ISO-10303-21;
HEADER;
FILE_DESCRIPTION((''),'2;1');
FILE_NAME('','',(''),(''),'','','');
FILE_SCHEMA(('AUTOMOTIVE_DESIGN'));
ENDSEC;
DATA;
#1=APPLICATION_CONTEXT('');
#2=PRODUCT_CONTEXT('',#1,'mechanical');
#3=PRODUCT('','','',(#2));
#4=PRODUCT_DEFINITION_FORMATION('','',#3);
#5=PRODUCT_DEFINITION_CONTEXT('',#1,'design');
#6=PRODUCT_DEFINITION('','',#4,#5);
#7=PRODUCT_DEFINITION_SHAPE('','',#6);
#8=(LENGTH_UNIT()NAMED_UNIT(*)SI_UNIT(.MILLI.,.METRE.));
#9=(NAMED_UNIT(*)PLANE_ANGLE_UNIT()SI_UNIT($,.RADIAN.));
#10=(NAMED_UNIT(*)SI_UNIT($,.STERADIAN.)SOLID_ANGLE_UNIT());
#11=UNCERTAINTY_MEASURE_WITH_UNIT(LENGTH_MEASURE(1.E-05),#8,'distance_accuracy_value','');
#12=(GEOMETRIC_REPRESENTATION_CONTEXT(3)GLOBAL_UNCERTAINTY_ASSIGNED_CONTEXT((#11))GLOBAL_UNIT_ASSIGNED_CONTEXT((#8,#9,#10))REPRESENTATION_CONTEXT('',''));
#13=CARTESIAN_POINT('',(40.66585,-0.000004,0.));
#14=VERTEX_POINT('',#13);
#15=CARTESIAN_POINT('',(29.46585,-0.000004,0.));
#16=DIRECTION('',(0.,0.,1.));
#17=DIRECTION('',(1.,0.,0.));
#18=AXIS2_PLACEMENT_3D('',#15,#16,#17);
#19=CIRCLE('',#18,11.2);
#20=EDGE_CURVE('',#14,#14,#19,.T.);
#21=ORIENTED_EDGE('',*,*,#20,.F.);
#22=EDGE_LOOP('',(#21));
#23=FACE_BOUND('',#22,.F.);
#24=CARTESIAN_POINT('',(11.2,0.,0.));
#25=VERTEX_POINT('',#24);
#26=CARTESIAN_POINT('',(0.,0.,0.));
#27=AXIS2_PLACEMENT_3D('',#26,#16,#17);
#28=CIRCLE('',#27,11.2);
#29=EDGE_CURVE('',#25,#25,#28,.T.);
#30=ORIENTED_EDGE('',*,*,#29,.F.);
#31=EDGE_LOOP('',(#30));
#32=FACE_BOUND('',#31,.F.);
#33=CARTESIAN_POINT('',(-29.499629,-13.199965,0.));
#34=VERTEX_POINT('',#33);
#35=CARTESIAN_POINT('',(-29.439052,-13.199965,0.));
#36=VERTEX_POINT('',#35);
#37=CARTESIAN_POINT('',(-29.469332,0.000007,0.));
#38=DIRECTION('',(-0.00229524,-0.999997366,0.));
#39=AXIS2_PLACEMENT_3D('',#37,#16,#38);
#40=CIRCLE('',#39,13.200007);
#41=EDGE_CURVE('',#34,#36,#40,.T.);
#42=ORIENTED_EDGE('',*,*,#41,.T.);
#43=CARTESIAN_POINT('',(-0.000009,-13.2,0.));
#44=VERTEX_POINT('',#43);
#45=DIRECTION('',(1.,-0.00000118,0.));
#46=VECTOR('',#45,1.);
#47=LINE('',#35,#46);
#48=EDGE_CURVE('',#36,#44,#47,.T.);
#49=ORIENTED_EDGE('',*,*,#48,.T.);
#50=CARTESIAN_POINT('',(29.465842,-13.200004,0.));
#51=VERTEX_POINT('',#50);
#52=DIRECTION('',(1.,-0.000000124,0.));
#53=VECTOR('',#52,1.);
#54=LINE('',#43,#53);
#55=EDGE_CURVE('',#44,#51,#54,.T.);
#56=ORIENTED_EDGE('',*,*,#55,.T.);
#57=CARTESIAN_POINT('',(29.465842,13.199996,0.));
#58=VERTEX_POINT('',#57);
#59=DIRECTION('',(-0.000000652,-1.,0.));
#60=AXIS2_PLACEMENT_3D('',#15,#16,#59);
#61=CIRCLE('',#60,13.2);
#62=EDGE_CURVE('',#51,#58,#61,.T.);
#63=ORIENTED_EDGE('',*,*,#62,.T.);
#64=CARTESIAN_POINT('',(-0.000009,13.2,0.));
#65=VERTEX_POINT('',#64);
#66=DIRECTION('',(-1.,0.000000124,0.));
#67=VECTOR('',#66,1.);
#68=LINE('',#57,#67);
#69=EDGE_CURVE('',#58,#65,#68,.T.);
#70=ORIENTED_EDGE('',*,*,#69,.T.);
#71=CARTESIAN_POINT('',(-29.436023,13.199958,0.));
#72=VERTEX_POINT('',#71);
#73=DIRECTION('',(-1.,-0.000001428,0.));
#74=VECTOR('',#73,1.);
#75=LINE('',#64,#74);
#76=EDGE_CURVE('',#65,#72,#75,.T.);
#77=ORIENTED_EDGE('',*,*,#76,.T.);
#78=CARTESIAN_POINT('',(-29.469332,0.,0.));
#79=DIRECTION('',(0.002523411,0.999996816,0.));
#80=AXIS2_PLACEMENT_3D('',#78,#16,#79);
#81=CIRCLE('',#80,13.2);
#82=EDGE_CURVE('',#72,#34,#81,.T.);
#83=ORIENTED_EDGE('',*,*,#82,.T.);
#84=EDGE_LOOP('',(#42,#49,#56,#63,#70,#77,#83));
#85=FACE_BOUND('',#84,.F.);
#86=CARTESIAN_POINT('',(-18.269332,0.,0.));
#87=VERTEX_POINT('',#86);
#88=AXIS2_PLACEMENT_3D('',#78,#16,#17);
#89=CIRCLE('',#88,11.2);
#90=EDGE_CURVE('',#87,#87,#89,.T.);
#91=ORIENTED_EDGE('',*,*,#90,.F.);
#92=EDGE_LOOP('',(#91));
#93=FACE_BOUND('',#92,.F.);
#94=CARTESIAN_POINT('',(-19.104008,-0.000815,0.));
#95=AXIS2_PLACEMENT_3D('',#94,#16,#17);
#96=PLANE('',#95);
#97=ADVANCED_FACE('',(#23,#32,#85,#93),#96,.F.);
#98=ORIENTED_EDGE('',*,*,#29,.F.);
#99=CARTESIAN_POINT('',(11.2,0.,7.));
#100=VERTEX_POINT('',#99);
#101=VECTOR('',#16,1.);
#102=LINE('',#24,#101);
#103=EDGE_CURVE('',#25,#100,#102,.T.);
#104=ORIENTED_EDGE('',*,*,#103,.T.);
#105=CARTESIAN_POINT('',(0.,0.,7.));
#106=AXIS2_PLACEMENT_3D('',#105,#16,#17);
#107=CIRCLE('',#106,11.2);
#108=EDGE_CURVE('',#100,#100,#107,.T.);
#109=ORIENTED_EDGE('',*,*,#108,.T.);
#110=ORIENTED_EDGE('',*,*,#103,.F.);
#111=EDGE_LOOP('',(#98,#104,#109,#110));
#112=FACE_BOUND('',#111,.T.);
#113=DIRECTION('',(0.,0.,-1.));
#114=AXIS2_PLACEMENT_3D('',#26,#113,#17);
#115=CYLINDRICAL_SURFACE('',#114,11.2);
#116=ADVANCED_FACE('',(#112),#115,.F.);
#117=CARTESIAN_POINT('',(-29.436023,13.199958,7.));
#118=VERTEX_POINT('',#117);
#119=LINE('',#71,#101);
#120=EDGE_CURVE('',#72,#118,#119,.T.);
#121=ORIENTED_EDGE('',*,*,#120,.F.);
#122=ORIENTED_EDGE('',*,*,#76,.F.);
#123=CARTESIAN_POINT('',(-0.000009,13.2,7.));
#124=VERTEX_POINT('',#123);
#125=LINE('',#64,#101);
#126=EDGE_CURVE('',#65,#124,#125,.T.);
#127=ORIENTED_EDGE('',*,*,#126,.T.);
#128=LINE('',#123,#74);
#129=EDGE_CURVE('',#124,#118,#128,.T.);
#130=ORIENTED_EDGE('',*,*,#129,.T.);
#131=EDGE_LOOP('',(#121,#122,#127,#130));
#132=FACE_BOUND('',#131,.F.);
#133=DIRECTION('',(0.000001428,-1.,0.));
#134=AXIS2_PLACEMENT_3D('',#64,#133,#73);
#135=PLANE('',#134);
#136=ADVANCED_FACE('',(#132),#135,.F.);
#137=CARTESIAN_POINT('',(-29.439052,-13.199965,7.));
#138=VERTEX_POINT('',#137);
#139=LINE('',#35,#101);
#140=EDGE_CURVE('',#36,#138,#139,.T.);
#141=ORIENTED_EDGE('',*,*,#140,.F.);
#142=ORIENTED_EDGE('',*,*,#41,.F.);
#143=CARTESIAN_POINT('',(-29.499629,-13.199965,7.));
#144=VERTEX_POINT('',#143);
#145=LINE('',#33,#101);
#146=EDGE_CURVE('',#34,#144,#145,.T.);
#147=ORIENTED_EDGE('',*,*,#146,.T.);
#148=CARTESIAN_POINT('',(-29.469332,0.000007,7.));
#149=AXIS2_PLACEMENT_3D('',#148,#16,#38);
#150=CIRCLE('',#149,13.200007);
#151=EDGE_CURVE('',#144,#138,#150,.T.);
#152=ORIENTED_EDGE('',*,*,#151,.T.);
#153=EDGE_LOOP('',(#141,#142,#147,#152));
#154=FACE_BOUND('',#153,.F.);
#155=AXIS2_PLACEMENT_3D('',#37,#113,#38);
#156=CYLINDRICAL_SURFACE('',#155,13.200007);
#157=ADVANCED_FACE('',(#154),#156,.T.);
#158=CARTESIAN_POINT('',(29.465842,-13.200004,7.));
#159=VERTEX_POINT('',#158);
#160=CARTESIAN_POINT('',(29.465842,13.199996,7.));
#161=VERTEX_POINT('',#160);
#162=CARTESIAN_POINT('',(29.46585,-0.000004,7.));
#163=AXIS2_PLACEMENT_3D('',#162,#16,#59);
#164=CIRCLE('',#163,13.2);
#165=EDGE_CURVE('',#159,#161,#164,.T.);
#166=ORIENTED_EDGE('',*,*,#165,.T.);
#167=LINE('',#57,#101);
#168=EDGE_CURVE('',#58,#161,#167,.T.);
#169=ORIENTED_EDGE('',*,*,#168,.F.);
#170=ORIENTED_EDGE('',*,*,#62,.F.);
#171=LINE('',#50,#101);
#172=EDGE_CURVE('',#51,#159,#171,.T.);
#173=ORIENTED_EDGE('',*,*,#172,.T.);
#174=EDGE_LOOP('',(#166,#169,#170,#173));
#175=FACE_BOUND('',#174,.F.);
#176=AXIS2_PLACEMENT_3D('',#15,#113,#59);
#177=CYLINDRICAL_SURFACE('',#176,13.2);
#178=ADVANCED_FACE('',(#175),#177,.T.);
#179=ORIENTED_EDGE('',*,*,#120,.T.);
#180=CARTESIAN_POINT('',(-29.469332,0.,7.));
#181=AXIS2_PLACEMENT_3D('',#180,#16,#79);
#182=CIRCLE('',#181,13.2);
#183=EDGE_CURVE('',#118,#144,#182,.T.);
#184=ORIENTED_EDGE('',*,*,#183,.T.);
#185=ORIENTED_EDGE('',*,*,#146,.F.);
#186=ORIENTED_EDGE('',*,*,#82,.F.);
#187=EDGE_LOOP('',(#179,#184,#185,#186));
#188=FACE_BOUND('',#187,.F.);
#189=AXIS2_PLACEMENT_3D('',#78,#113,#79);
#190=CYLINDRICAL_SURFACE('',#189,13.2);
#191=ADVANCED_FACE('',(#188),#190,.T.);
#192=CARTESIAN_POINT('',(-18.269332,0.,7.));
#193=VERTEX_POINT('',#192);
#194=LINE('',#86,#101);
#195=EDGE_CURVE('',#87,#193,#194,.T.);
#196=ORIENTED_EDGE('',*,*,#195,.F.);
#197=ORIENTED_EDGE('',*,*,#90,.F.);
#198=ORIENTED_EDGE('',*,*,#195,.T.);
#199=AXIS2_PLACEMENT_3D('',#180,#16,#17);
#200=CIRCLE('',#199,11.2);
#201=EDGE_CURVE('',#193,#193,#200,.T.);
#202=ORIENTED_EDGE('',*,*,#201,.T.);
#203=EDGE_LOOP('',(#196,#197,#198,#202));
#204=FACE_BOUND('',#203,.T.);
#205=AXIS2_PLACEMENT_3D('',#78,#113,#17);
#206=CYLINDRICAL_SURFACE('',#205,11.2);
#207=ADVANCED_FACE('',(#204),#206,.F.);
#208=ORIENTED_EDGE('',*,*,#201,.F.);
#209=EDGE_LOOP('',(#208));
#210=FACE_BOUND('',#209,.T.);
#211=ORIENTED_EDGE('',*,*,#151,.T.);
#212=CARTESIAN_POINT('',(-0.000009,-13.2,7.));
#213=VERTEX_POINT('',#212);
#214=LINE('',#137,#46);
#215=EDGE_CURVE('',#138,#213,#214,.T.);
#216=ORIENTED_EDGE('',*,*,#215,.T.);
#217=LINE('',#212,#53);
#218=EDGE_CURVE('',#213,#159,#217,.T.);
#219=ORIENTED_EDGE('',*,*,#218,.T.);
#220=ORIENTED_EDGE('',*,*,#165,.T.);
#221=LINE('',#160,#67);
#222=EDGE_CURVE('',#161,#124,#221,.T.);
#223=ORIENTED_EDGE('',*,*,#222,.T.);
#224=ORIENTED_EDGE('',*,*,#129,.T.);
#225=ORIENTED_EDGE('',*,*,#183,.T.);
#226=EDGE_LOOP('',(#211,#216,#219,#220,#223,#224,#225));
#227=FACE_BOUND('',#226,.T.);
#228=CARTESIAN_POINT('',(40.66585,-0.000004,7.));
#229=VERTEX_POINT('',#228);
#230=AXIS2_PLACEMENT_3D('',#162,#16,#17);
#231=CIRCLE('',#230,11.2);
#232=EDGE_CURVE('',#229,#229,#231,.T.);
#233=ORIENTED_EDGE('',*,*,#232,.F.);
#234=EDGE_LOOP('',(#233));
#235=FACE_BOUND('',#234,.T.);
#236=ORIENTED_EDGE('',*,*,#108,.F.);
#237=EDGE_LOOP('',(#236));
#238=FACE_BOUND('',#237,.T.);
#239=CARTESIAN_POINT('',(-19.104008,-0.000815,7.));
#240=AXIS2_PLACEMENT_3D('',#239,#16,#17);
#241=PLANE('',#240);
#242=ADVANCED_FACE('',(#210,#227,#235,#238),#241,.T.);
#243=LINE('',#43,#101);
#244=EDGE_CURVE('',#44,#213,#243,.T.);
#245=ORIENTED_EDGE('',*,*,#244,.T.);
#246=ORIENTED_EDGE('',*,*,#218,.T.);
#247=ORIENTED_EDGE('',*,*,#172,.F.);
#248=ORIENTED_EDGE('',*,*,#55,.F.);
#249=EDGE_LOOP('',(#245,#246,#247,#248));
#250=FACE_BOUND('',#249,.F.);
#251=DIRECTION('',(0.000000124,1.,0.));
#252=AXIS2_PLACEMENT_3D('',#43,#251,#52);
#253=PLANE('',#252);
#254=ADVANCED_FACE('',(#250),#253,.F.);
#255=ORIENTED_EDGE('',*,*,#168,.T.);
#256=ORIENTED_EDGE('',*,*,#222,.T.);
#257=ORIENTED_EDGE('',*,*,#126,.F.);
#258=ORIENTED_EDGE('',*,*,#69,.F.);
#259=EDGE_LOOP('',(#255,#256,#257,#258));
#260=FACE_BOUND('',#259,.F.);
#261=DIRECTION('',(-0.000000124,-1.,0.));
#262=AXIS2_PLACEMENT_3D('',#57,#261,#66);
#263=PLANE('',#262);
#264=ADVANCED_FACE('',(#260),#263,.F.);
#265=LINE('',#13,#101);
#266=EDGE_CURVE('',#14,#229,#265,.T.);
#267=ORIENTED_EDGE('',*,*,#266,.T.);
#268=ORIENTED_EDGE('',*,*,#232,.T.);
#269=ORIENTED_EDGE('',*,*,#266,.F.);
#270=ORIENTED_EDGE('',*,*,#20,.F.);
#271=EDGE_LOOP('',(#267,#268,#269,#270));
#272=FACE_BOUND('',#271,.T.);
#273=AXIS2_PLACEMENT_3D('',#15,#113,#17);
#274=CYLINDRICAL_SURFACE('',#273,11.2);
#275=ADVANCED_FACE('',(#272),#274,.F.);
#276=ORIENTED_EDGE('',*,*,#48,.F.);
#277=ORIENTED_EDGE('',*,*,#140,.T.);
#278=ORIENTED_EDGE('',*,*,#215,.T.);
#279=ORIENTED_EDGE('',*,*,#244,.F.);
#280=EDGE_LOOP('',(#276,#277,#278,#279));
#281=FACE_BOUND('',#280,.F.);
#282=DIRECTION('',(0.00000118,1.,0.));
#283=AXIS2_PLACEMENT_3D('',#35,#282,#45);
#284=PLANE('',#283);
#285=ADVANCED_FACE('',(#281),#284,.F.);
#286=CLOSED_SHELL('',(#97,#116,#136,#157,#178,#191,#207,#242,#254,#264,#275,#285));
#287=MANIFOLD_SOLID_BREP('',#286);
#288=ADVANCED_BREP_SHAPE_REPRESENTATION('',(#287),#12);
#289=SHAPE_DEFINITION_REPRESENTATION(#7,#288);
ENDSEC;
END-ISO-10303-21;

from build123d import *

# Parameters (mm, degrees)
F0_R     = 11.2
F1_DEPTH = 7


# Not quite as in the source:
# - ends of sketch curves that miss each other by under 0.0002 mm in the source are joined


with BuildPart() as f1:
    # F0 (on Top) → F1 (new body)
    with BuildSketch(Plane.XY):
        with BuildLine():
            ThreePointArc((-8.6004e-06, -13.2), (-13.2, 0), (-8.6004e-06, 13.2))
            Line((-8.6004e-06, 13.2), (-29.4360226951, 13.1999579737))
            ThreePointArc((-29.4360226951, 13.1999579737), (-42.6692934144, 0.0318031051), (-29.4996289049, -13.1999652303))
            ThreePointArc((-29.4996289049, -13.1999652303), (-29.4693403268, -13.2), (-29.4390517487, -13.1999652698))
            Line((-29.4390517487, -13.1999652698), (-8.6004e-06, -13.2))
        make_face()
        with Locations((-29.4693317264, 0)):
            Circle(F0_R, mode=Mode.SUBTRACT)
        with BuildLine():
            ThreePointArc((-8.6004e-06, 13.2), (9.333806471, 9.3338125524), (13.2, 0))
            ThreePointArc((13.2, 0), (9.333806471, -9.3338125524), (-8.6004e-06, -13.2))
            Line((-8.6004e-06, -13.2), (29.4658418158, -13.200003649))
            ThreePointArc((29.4658418158, -13.200003649), (42.6658504162, -3.649e-06), (29.4658418158, 13.199996351))
            Line((29.4658418158, 13.199996351), (-8.6004e-06, 13.2))
        make_face()
        with Locations((29.4658504162, -3.649e-06)):
            Circle(F0_R, mode=Mode.SUBTRACT)
        with BuildLine():
            ThreePointArc((-8.6004e-06, -13.2), (9.333806471, -9.3338125524), (13.2, 0))
            ThreePointArc((13.2, 0), (9.333806471, 9.3338125524), (-8.6004e-06, 13.2))
            ThreePointArc((-8.6004e-06, 13.2), (-13.2, 0), (-8.6004e-06, -13.2))
        make_face()
        Circle(F0_R, mode=Mode.SUBTRACT)
    extrude(amount=F1_DEPTH)


solid = f1.part
